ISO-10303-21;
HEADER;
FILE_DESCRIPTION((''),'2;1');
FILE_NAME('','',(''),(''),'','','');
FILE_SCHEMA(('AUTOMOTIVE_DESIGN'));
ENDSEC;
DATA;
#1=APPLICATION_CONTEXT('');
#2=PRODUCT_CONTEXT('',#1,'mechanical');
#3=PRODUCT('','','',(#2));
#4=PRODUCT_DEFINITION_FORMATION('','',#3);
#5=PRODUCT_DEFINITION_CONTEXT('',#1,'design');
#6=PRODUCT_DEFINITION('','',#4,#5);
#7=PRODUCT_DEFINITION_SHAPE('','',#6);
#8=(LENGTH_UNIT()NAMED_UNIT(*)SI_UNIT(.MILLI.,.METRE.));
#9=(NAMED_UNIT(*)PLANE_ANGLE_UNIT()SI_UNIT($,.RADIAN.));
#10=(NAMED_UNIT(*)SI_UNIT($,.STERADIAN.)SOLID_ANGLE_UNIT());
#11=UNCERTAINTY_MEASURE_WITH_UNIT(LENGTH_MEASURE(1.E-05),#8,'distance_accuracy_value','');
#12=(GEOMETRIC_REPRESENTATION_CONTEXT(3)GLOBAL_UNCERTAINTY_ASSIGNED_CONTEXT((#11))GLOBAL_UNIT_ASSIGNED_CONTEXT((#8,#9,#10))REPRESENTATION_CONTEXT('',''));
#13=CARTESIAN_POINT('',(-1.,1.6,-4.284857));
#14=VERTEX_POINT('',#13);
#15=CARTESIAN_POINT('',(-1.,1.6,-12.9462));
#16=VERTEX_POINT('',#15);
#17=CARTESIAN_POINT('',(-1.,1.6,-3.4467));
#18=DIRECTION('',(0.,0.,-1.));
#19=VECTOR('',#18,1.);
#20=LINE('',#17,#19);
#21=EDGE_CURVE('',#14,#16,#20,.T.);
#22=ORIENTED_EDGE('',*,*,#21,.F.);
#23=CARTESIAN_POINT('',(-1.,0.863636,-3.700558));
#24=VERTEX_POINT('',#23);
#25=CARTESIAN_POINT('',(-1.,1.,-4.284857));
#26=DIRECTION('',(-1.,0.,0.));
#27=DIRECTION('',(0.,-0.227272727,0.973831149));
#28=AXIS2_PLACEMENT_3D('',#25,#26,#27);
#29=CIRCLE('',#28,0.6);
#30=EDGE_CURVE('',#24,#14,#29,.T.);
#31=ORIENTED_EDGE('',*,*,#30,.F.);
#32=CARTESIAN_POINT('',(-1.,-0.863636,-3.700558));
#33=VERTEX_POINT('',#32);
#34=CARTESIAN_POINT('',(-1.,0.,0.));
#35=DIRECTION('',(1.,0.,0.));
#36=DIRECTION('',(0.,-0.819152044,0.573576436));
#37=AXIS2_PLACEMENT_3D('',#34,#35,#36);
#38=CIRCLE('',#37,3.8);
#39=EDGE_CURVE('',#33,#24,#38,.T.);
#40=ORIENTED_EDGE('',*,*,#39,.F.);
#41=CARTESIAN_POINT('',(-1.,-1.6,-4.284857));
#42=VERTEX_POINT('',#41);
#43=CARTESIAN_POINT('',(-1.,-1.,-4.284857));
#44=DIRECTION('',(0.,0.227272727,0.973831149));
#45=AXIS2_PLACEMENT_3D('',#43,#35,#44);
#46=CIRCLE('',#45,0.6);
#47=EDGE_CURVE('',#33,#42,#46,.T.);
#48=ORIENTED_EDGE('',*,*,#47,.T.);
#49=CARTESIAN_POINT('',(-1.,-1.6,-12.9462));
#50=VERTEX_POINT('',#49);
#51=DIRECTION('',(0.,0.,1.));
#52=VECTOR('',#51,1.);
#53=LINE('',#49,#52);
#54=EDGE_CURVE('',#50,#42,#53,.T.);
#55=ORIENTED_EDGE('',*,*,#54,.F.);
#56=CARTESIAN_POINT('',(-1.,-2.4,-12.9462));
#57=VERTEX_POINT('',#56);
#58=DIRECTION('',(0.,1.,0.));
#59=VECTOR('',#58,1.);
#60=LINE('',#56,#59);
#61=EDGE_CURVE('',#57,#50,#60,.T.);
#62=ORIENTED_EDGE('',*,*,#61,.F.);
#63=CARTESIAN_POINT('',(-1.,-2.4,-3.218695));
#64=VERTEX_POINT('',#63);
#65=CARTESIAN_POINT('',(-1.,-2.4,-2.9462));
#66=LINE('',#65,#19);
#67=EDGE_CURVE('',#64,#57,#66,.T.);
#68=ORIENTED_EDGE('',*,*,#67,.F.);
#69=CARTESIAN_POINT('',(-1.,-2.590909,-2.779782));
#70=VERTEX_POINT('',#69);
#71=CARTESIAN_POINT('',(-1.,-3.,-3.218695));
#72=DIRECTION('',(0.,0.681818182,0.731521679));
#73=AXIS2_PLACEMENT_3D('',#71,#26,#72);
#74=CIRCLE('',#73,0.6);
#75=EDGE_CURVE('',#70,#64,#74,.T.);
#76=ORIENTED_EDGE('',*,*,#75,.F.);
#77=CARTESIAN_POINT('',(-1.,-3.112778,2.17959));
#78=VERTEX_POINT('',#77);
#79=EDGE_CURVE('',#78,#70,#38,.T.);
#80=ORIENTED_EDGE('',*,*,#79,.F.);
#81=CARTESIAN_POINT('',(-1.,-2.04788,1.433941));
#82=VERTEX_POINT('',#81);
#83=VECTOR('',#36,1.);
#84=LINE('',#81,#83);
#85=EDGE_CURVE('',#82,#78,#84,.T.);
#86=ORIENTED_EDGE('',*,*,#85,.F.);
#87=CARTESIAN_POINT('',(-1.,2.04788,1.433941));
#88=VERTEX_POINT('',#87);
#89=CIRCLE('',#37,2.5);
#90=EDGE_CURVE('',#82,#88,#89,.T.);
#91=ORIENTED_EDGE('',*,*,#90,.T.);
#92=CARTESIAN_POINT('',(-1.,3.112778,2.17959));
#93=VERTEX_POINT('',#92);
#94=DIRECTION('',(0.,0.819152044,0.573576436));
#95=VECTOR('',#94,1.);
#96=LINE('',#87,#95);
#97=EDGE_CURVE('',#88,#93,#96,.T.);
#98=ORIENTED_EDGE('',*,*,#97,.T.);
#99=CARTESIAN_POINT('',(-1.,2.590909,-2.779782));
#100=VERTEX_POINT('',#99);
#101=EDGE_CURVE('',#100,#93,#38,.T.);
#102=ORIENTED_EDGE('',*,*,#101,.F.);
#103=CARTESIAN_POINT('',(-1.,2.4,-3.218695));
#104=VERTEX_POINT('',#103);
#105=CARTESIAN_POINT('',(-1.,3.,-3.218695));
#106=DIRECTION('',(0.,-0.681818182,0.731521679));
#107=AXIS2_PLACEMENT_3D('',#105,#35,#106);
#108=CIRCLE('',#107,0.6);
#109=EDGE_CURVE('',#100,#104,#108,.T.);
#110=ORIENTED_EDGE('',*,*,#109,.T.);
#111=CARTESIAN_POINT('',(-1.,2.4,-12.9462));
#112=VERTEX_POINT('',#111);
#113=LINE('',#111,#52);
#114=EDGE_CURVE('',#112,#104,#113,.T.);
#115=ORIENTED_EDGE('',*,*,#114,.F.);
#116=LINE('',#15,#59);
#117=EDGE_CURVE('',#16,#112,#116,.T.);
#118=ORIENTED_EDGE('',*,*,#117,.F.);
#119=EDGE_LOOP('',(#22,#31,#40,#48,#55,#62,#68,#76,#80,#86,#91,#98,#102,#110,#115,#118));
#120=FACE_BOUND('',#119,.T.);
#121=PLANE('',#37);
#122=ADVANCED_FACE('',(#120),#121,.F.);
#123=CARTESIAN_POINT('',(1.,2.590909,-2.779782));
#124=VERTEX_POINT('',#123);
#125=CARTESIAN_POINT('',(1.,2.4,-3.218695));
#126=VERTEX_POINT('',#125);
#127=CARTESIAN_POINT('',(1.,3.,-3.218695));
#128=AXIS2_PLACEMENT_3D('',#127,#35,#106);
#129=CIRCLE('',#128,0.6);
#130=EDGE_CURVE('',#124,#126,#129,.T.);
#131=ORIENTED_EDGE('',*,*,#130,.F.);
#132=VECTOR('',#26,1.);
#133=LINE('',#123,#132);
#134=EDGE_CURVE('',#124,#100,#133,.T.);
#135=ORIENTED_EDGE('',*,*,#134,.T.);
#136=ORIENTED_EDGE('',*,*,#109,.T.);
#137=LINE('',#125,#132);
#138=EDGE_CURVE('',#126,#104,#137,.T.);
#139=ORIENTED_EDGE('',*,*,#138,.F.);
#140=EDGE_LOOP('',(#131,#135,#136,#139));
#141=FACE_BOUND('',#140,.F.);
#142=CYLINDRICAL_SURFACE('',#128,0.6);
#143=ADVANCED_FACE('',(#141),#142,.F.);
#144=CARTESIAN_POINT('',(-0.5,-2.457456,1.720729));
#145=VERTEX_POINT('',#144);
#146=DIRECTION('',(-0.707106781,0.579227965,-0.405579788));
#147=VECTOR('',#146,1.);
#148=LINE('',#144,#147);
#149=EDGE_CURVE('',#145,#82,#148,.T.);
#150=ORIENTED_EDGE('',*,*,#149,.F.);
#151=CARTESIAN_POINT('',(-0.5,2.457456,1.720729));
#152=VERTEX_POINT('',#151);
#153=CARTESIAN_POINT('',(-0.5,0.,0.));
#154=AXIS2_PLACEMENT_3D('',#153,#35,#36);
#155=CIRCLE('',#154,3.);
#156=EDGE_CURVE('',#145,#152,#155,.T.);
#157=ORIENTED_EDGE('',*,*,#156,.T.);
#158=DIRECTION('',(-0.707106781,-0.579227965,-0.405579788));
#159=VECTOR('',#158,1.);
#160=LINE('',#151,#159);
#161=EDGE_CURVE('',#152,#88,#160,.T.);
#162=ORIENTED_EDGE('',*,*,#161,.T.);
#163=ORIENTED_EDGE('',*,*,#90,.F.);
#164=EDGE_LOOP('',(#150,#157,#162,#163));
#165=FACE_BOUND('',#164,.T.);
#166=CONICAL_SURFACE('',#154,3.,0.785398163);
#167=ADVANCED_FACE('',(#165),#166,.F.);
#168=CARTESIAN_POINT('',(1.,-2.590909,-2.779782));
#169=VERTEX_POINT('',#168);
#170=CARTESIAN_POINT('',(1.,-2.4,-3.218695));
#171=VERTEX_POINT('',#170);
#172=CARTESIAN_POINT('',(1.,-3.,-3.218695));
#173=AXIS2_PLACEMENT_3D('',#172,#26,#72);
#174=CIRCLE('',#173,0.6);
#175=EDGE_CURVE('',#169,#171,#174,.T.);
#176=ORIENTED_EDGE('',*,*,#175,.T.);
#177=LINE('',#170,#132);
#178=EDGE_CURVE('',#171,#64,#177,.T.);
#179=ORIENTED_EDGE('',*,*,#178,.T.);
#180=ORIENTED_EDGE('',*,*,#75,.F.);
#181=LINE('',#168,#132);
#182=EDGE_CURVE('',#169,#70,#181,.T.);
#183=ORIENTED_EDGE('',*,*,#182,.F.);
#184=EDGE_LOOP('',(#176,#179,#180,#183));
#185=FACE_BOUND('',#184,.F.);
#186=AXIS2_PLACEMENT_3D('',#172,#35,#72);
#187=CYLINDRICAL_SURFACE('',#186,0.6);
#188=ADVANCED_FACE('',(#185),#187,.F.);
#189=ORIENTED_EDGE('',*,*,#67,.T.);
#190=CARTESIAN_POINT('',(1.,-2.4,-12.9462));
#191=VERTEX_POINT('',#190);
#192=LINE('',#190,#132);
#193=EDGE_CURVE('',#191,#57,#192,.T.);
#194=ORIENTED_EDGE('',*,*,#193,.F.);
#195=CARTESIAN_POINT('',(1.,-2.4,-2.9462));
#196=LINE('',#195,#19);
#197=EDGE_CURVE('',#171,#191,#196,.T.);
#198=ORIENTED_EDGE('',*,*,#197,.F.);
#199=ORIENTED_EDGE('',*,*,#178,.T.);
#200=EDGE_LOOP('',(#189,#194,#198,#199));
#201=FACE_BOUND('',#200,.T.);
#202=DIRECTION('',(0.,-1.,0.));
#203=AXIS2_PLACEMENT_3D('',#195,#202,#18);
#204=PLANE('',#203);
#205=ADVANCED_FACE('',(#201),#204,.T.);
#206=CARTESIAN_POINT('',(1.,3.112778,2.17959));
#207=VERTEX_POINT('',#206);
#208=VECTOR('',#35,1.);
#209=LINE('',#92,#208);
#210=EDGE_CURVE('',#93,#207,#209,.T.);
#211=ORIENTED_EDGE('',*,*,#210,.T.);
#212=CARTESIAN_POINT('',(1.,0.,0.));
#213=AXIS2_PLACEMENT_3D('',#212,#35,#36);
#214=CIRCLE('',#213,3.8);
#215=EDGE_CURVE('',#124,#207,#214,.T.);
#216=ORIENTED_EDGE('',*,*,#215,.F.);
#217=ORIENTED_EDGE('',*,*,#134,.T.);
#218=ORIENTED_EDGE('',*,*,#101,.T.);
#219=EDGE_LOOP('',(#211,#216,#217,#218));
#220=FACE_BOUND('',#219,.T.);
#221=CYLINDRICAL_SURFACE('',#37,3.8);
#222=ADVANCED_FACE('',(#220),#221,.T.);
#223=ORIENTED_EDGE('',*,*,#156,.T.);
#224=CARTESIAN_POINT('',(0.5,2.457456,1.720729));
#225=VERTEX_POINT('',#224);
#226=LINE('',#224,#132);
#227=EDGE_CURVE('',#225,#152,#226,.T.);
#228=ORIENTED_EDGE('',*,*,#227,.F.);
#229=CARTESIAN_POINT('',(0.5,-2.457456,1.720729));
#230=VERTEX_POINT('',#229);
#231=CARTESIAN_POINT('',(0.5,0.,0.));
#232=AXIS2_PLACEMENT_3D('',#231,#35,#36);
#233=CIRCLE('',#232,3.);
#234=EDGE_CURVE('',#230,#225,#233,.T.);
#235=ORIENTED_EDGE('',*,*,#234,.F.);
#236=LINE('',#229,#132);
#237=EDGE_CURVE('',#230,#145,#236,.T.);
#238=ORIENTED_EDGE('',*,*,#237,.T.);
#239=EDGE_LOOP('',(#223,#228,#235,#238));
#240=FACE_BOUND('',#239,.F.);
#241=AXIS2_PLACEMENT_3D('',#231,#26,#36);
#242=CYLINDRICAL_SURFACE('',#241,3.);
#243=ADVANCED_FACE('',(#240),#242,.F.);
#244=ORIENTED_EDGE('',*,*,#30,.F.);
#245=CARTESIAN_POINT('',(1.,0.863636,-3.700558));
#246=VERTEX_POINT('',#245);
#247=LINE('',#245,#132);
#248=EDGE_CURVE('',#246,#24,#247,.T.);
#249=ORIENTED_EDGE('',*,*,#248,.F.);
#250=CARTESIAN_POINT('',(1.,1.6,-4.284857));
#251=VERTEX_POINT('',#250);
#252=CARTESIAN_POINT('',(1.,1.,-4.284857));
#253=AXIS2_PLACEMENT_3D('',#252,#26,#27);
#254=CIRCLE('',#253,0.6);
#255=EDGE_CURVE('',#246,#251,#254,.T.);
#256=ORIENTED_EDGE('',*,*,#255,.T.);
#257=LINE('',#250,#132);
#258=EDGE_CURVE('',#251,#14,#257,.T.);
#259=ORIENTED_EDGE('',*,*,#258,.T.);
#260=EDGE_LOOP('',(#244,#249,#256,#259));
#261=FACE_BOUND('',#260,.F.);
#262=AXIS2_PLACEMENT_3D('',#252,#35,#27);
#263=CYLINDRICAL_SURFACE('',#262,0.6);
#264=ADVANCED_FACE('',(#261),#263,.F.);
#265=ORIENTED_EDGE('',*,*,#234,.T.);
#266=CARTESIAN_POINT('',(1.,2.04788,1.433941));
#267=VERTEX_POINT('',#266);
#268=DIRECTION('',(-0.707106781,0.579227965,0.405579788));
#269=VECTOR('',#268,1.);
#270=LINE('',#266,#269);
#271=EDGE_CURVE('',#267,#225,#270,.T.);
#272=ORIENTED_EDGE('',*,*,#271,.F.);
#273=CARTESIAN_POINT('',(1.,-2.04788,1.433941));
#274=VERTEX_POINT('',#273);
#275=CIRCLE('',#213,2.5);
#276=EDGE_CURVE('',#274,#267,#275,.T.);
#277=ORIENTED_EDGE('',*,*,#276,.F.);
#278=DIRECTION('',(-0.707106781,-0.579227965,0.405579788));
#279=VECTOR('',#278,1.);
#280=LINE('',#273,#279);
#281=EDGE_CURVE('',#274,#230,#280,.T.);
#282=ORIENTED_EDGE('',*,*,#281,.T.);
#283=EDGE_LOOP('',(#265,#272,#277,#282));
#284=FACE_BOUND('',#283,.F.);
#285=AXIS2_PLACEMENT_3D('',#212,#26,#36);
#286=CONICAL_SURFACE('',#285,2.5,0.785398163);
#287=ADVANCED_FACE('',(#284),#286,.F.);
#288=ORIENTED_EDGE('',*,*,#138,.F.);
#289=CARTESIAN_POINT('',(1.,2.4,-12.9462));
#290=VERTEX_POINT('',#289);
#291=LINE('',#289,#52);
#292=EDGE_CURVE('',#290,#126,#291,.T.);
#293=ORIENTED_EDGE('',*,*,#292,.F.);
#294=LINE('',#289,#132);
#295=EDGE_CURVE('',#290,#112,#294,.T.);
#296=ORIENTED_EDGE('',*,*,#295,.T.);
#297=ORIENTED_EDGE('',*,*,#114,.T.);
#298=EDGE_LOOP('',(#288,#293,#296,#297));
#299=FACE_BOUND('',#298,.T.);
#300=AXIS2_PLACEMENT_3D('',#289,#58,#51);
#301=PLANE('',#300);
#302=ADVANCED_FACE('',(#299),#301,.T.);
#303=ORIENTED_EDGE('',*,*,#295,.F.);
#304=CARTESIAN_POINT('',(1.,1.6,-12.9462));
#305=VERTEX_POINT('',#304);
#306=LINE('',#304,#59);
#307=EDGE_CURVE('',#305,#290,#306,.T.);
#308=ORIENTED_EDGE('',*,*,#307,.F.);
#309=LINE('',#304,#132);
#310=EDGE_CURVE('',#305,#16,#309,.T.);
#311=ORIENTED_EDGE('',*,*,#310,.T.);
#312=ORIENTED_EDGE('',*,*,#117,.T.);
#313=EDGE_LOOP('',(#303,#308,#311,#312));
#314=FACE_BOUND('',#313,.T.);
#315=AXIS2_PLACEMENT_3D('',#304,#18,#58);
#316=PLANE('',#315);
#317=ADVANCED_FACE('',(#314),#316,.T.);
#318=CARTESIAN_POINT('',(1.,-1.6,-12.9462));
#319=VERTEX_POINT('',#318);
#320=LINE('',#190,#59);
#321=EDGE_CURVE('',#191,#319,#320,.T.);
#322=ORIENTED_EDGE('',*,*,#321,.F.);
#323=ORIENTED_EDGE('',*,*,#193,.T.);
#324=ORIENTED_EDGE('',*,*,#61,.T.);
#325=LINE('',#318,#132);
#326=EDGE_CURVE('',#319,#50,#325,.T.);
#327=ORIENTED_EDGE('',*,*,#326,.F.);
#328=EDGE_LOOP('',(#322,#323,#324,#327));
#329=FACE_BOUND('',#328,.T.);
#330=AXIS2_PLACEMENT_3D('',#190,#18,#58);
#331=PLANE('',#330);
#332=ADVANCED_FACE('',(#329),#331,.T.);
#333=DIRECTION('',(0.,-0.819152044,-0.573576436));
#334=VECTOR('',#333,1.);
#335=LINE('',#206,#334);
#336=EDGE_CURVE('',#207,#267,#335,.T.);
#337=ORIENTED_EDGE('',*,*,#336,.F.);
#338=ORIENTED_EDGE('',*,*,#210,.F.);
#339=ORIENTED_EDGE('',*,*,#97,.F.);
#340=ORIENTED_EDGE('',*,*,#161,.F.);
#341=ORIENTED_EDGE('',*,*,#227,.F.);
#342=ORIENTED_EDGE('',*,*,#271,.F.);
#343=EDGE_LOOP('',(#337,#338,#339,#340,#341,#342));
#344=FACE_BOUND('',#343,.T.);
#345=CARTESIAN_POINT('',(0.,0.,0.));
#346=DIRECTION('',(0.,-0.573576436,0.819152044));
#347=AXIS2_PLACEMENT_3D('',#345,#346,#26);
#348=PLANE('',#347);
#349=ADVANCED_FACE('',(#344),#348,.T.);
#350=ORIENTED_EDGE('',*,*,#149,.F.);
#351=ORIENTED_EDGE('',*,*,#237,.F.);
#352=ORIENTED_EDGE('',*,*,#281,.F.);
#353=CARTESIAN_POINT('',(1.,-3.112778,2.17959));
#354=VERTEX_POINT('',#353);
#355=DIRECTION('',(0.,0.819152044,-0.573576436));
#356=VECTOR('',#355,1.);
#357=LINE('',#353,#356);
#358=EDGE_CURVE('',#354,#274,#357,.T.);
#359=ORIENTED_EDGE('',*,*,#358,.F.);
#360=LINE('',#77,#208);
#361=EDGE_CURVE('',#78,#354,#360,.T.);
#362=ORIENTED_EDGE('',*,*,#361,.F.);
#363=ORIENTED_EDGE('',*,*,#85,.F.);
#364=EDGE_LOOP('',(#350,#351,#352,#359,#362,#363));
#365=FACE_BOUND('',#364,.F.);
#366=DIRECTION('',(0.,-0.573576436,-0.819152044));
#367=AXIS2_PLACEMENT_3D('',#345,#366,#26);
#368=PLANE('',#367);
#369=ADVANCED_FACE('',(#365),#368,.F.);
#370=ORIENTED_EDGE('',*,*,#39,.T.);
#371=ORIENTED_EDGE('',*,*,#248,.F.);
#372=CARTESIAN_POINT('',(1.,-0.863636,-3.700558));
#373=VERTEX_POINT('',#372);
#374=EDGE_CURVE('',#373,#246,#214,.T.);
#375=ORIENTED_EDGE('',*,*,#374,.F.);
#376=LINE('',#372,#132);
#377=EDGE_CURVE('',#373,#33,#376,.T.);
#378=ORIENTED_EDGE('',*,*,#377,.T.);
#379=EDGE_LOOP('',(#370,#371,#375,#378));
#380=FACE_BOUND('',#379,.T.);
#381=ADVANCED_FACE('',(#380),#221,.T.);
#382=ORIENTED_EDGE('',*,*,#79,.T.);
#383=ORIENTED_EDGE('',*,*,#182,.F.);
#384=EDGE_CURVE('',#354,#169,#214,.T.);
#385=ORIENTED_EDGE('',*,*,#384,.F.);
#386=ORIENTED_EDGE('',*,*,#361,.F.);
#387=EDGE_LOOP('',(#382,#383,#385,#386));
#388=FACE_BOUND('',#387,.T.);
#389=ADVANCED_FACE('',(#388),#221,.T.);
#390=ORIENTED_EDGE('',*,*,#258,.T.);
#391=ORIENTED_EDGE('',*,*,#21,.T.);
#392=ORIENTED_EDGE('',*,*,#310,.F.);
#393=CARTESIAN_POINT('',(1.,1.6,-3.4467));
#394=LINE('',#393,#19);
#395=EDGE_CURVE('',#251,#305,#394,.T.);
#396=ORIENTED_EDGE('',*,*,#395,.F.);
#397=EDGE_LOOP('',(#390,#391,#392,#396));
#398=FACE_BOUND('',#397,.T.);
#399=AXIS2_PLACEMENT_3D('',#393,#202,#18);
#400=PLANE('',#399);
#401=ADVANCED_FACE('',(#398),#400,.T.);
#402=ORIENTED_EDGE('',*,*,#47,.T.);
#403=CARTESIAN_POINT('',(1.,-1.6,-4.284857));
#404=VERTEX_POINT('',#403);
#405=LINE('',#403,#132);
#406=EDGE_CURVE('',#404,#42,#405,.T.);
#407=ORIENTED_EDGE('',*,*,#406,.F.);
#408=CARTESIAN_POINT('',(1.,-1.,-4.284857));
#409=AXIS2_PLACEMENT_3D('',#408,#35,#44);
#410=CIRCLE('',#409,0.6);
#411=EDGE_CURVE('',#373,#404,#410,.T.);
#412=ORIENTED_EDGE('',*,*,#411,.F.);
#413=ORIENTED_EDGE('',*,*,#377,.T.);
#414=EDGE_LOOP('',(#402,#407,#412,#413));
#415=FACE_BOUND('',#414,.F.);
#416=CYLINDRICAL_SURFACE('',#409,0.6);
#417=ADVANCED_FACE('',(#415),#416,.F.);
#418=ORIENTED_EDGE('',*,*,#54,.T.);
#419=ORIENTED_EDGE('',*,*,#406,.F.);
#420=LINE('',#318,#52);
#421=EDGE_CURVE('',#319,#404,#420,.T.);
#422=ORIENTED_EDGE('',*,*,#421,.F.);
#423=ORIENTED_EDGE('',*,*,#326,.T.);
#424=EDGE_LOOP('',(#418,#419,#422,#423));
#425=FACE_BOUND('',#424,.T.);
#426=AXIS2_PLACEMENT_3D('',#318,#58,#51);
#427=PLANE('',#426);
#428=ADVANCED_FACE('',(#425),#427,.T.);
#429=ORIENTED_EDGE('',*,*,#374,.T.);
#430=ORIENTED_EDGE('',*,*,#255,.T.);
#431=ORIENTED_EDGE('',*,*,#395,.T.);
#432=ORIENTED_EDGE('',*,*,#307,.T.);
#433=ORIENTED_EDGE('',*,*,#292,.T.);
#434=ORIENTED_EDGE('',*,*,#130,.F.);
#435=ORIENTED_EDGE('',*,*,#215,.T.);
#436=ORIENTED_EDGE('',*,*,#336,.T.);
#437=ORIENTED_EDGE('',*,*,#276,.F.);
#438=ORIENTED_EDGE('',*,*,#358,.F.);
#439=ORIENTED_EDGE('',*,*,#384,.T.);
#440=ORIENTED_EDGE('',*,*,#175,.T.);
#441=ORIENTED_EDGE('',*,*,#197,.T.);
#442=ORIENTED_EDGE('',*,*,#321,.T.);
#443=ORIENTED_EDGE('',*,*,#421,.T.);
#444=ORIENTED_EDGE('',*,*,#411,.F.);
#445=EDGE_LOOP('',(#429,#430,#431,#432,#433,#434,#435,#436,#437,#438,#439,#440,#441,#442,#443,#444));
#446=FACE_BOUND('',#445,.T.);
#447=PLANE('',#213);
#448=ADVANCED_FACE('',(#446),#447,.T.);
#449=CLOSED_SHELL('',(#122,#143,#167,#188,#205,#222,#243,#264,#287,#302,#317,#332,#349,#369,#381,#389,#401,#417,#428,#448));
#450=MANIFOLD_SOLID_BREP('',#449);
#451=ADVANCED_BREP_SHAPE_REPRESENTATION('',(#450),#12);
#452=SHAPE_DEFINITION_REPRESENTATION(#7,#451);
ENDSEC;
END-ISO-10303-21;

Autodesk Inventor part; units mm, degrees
ref_plane "YZ Plane" through (0, 0, 0) normal (1, 0, 0) x (0, 1, 0)
ref_plane "XZ Plane" through (0, 0, 0) normal (0, 1, 0) x (-1, 0, 0)
ref_plane "XY Plane" through (0, 0, 0) normal (0, 0, 1) x (1, 0, 0)
sketch "Sketch4" plane through (0, 0, 0) normal (0, 1, 0) x (-1, 0, 0)
  line L0 (1, -2.5) -> (1, -3.8)
  line L1 (1, -3.8) -> (-1, -3.8)
  line L2 (-1, -3.8) -> (-1, -2.5)
  line L3 (-1, -2.5) -> (-0.5, -3)
  line L4 (-0.5, -3) -> (0.5, -3)
  line L5 (0.5, -3) -> (1, -2.5)
  line L6 (0, 0) -> (-1.4783, 0)
  point P0 (0, -3)
  dimension "d21" = 1
  dimension "d22" = 3
  dimension "d24" = 0.8
  dimension "d32" = 0.5
revolve "Revolution1" add sketch "Sketch4" angle 250 mid plane about axis through (0, 0, 0) along (1, 0, 0)
sketch "Sketch5" plane through (1, 0, 0) normal (1, 0, 0) x (0, 0, -1)
  arc A0 (-2.1796, -3.1128) -> (-2.1796, 3.1128) centre (0, 0) ccw projected
  line L0 (2.9462, -2.4) -> (12.9462, -2.4)
  line L1 (12.9462, -2.4) -> (12.9462, -1.6)
  line L2 (12.9462, -1.6) -> (3.4467, -1.6)
  line L3 (3.4467, 1.6) -> (12.9462, 1.6)
  line L4 (12.9462, 1.6) -> (12.9462, 2.4)
  line L5 (12.9462, 2.4) -> (2.9462, 2.4)
  point P0 (0, 0)
  point P1 (12.9462, 2)
  point P2 (12.9462, -2)
  dimension "d26" = 0.8
  dimension "d27" = 10
  dimension "d28" = 4
  dimension "d10" = 1.5
  dimension "d11" = 0.8
  dimension "d12" = 6
  dimension "d13" = 5.5
  dimension "d14" = 0.5
  dimension "d15" = 0.8
  dimension "d16" = 8
extrude "Extrusion5" add sketch "Sketch5" against normal up to surface (2 mm away)
fillet "Fillet1" radius 0.6 4 edges at (0, 2.4, -2.9462) (0, 1.6, -3.4467) (0, -1.6, -3.4467) (0, -2.4, -2.9462)
sketch "Sketch1" plane through (0, 0, 0) normal (0, 1, 0) x (-1, 0, 0)
  line L0 (-1, 2.3) -> (0, 3.3)
  line L1 (0, 3.3) -> (1, 2.3)
  line L2 (1, 2.3) -> (1, 4.5)
  line L3 (1, 4.5) -> (-1, 4.5)
  line L4 (-1, 4.5) -> (-1, 2.3)
  line L5 (0, 0) -> (-2.1371, 0)
  line L6 (-1, -2.3) -> (0, -3.3)
  line L7 (0, -3.3) -> (1, -2.3)
  line L8 (1, -2.3) -> (1, -4.5)
  line L9 (1, -4.5) -> (-1, -4.5)
  line L10 (-1, -4.5) -> (-1, -2.3)
  dimension "d0" = 45
  dimension "d1" = 3.3
  dimension "d2" = 2
  dimension "d3" = 4.5
sketch "Sketch2" plane through (-1, 0, 4.5) normal (0, 0, 1) x (1, 0, 0)
  line L0 (0, 0) -> (2, 0) projected
  line L1 (2, 0) -> (2, -2)
  line L2 (2, -2) -> (-3, -2)
  line L3 (-3, -2) -> (0, 0)
  point P0 (1, 0)
  dimension "d6" = 2
  dimension "d7" = 5
properties part number "6mm lens mount"
